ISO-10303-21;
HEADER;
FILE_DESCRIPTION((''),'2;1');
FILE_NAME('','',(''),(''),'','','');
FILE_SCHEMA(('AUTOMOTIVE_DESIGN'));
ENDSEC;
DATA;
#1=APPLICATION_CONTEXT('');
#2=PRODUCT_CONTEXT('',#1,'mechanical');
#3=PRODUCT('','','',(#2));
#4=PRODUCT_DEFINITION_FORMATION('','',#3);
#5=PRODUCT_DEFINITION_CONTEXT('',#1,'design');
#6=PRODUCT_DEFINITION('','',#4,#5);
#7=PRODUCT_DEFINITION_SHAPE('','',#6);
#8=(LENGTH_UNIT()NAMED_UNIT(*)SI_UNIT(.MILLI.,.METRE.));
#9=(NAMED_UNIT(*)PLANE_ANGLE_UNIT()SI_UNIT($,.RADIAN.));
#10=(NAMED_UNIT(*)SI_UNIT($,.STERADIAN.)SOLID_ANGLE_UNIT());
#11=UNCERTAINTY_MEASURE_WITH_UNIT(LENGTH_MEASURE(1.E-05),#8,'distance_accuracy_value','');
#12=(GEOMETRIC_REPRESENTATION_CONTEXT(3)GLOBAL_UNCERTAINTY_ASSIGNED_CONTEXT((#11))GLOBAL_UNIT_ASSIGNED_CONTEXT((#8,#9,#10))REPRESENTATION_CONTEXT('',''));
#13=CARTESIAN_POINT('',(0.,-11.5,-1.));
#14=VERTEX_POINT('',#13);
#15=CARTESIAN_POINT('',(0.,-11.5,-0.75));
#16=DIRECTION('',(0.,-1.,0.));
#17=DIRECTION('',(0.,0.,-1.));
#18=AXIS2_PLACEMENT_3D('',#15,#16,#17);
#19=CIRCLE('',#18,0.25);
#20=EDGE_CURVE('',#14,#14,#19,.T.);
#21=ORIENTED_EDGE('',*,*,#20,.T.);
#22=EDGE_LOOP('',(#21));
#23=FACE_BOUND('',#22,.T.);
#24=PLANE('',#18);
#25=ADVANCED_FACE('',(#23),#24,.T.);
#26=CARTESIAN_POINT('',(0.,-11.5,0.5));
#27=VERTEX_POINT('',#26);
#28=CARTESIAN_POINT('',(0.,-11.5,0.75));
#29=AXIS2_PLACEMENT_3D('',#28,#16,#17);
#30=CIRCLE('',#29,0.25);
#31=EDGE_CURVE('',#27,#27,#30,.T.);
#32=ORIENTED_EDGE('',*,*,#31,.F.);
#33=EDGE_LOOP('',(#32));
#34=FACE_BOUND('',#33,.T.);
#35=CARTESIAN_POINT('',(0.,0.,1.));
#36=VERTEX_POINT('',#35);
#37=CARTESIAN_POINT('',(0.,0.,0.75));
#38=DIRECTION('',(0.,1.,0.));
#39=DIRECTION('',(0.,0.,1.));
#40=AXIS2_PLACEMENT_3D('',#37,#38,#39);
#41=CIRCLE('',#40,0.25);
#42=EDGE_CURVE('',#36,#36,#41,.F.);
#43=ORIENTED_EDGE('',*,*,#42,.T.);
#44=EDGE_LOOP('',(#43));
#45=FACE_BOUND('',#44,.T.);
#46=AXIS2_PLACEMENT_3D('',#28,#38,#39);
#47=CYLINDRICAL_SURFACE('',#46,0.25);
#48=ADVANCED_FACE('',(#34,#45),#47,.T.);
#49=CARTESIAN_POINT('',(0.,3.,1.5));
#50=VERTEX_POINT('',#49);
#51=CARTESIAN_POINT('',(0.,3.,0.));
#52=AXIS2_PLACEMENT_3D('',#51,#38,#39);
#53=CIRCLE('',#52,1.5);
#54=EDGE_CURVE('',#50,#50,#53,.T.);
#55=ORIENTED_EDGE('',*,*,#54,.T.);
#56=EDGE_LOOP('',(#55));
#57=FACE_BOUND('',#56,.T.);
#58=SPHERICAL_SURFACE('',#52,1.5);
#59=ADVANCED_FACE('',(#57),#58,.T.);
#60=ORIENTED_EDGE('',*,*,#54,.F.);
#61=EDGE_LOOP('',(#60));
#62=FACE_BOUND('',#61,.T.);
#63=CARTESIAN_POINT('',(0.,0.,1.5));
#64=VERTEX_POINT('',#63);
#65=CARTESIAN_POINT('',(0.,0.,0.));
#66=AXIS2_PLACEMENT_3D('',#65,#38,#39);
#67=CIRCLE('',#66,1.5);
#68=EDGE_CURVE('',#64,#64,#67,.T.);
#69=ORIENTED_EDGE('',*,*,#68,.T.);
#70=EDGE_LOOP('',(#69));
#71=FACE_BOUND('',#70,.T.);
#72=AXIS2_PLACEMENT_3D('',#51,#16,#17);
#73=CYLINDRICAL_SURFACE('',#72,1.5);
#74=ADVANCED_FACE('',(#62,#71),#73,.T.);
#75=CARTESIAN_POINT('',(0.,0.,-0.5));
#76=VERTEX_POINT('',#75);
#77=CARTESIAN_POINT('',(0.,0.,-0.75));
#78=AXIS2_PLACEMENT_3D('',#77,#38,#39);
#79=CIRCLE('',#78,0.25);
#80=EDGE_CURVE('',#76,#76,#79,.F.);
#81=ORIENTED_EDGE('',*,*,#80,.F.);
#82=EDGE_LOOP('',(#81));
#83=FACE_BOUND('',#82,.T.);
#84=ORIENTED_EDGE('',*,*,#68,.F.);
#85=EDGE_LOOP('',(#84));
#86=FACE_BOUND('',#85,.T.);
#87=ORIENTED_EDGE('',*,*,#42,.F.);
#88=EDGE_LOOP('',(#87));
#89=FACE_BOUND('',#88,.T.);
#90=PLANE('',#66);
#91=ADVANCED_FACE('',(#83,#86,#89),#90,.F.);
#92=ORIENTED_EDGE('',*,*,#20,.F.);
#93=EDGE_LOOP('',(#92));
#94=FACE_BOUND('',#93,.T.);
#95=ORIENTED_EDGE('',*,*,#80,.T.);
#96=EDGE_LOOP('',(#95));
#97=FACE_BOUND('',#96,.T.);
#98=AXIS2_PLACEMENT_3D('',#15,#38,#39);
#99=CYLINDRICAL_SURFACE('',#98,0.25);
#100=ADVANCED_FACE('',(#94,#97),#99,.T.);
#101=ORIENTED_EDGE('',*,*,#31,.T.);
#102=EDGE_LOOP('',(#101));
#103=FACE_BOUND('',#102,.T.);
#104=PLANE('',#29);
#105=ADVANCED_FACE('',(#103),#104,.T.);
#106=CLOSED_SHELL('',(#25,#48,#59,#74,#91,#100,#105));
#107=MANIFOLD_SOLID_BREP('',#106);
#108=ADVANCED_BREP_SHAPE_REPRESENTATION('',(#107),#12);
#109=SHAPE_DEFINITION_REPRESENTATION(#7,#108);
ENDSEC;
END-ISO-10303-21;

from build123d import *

# Parameters (mm, degrees)
SKETCH1_R           = 1.5
BOSS_EXTRUDE1_DEPTH = 3
SKETCH2_R           = 0.25
BOSS_EXTRUDE2_DEPTH = 11.5


# Read off the part's stored shape, not the designer's step: Dome1
with BuildPart() as part:
    # Sketch1 → Boss-Extrude1 (new body)
    with BuildSketch(Plane(origin=(0, 0, 0), x_dir=(1, 0, 0), z_dir=(0, 1, 0))):
        with Locations(Location((0, 0, 0), (0, 0, 270))):
            Circle(SKETCH1_R)
    extrude(amount=BOSS_EXTRUDE1_DEPTH)

    # Dome1 outline → Dome1 (revolve)
    with BuildSketch(Plane.XY):
        with BuildLine():
            Line((0, 3), (1.5, 2.999999998))
            ThreePointArc((1.5, 2.999999998), (1.060660172, 4.060660171), (0, 4.5))
            Line((0, 4.5), (0, 3))
        make_face()
    revolve(axis=Axis((0, 0, 0), (0, 1, 0)))

    # Sketch2 → Boss-Extrude2 (add)
    with BuildSketch(Plane.XZ):
        with Locations(Location((0, 0.75, 0), (0, 0, 90))):
            Circle(SKETCH2_R)
        with Locations(Location((0, -0.75, 0), (0, 0, 90))):
            Circle(SKETCH2_R)
    extrude(amount=BOSS_EXTRUDE2_DEPTH)


solid = part.part
